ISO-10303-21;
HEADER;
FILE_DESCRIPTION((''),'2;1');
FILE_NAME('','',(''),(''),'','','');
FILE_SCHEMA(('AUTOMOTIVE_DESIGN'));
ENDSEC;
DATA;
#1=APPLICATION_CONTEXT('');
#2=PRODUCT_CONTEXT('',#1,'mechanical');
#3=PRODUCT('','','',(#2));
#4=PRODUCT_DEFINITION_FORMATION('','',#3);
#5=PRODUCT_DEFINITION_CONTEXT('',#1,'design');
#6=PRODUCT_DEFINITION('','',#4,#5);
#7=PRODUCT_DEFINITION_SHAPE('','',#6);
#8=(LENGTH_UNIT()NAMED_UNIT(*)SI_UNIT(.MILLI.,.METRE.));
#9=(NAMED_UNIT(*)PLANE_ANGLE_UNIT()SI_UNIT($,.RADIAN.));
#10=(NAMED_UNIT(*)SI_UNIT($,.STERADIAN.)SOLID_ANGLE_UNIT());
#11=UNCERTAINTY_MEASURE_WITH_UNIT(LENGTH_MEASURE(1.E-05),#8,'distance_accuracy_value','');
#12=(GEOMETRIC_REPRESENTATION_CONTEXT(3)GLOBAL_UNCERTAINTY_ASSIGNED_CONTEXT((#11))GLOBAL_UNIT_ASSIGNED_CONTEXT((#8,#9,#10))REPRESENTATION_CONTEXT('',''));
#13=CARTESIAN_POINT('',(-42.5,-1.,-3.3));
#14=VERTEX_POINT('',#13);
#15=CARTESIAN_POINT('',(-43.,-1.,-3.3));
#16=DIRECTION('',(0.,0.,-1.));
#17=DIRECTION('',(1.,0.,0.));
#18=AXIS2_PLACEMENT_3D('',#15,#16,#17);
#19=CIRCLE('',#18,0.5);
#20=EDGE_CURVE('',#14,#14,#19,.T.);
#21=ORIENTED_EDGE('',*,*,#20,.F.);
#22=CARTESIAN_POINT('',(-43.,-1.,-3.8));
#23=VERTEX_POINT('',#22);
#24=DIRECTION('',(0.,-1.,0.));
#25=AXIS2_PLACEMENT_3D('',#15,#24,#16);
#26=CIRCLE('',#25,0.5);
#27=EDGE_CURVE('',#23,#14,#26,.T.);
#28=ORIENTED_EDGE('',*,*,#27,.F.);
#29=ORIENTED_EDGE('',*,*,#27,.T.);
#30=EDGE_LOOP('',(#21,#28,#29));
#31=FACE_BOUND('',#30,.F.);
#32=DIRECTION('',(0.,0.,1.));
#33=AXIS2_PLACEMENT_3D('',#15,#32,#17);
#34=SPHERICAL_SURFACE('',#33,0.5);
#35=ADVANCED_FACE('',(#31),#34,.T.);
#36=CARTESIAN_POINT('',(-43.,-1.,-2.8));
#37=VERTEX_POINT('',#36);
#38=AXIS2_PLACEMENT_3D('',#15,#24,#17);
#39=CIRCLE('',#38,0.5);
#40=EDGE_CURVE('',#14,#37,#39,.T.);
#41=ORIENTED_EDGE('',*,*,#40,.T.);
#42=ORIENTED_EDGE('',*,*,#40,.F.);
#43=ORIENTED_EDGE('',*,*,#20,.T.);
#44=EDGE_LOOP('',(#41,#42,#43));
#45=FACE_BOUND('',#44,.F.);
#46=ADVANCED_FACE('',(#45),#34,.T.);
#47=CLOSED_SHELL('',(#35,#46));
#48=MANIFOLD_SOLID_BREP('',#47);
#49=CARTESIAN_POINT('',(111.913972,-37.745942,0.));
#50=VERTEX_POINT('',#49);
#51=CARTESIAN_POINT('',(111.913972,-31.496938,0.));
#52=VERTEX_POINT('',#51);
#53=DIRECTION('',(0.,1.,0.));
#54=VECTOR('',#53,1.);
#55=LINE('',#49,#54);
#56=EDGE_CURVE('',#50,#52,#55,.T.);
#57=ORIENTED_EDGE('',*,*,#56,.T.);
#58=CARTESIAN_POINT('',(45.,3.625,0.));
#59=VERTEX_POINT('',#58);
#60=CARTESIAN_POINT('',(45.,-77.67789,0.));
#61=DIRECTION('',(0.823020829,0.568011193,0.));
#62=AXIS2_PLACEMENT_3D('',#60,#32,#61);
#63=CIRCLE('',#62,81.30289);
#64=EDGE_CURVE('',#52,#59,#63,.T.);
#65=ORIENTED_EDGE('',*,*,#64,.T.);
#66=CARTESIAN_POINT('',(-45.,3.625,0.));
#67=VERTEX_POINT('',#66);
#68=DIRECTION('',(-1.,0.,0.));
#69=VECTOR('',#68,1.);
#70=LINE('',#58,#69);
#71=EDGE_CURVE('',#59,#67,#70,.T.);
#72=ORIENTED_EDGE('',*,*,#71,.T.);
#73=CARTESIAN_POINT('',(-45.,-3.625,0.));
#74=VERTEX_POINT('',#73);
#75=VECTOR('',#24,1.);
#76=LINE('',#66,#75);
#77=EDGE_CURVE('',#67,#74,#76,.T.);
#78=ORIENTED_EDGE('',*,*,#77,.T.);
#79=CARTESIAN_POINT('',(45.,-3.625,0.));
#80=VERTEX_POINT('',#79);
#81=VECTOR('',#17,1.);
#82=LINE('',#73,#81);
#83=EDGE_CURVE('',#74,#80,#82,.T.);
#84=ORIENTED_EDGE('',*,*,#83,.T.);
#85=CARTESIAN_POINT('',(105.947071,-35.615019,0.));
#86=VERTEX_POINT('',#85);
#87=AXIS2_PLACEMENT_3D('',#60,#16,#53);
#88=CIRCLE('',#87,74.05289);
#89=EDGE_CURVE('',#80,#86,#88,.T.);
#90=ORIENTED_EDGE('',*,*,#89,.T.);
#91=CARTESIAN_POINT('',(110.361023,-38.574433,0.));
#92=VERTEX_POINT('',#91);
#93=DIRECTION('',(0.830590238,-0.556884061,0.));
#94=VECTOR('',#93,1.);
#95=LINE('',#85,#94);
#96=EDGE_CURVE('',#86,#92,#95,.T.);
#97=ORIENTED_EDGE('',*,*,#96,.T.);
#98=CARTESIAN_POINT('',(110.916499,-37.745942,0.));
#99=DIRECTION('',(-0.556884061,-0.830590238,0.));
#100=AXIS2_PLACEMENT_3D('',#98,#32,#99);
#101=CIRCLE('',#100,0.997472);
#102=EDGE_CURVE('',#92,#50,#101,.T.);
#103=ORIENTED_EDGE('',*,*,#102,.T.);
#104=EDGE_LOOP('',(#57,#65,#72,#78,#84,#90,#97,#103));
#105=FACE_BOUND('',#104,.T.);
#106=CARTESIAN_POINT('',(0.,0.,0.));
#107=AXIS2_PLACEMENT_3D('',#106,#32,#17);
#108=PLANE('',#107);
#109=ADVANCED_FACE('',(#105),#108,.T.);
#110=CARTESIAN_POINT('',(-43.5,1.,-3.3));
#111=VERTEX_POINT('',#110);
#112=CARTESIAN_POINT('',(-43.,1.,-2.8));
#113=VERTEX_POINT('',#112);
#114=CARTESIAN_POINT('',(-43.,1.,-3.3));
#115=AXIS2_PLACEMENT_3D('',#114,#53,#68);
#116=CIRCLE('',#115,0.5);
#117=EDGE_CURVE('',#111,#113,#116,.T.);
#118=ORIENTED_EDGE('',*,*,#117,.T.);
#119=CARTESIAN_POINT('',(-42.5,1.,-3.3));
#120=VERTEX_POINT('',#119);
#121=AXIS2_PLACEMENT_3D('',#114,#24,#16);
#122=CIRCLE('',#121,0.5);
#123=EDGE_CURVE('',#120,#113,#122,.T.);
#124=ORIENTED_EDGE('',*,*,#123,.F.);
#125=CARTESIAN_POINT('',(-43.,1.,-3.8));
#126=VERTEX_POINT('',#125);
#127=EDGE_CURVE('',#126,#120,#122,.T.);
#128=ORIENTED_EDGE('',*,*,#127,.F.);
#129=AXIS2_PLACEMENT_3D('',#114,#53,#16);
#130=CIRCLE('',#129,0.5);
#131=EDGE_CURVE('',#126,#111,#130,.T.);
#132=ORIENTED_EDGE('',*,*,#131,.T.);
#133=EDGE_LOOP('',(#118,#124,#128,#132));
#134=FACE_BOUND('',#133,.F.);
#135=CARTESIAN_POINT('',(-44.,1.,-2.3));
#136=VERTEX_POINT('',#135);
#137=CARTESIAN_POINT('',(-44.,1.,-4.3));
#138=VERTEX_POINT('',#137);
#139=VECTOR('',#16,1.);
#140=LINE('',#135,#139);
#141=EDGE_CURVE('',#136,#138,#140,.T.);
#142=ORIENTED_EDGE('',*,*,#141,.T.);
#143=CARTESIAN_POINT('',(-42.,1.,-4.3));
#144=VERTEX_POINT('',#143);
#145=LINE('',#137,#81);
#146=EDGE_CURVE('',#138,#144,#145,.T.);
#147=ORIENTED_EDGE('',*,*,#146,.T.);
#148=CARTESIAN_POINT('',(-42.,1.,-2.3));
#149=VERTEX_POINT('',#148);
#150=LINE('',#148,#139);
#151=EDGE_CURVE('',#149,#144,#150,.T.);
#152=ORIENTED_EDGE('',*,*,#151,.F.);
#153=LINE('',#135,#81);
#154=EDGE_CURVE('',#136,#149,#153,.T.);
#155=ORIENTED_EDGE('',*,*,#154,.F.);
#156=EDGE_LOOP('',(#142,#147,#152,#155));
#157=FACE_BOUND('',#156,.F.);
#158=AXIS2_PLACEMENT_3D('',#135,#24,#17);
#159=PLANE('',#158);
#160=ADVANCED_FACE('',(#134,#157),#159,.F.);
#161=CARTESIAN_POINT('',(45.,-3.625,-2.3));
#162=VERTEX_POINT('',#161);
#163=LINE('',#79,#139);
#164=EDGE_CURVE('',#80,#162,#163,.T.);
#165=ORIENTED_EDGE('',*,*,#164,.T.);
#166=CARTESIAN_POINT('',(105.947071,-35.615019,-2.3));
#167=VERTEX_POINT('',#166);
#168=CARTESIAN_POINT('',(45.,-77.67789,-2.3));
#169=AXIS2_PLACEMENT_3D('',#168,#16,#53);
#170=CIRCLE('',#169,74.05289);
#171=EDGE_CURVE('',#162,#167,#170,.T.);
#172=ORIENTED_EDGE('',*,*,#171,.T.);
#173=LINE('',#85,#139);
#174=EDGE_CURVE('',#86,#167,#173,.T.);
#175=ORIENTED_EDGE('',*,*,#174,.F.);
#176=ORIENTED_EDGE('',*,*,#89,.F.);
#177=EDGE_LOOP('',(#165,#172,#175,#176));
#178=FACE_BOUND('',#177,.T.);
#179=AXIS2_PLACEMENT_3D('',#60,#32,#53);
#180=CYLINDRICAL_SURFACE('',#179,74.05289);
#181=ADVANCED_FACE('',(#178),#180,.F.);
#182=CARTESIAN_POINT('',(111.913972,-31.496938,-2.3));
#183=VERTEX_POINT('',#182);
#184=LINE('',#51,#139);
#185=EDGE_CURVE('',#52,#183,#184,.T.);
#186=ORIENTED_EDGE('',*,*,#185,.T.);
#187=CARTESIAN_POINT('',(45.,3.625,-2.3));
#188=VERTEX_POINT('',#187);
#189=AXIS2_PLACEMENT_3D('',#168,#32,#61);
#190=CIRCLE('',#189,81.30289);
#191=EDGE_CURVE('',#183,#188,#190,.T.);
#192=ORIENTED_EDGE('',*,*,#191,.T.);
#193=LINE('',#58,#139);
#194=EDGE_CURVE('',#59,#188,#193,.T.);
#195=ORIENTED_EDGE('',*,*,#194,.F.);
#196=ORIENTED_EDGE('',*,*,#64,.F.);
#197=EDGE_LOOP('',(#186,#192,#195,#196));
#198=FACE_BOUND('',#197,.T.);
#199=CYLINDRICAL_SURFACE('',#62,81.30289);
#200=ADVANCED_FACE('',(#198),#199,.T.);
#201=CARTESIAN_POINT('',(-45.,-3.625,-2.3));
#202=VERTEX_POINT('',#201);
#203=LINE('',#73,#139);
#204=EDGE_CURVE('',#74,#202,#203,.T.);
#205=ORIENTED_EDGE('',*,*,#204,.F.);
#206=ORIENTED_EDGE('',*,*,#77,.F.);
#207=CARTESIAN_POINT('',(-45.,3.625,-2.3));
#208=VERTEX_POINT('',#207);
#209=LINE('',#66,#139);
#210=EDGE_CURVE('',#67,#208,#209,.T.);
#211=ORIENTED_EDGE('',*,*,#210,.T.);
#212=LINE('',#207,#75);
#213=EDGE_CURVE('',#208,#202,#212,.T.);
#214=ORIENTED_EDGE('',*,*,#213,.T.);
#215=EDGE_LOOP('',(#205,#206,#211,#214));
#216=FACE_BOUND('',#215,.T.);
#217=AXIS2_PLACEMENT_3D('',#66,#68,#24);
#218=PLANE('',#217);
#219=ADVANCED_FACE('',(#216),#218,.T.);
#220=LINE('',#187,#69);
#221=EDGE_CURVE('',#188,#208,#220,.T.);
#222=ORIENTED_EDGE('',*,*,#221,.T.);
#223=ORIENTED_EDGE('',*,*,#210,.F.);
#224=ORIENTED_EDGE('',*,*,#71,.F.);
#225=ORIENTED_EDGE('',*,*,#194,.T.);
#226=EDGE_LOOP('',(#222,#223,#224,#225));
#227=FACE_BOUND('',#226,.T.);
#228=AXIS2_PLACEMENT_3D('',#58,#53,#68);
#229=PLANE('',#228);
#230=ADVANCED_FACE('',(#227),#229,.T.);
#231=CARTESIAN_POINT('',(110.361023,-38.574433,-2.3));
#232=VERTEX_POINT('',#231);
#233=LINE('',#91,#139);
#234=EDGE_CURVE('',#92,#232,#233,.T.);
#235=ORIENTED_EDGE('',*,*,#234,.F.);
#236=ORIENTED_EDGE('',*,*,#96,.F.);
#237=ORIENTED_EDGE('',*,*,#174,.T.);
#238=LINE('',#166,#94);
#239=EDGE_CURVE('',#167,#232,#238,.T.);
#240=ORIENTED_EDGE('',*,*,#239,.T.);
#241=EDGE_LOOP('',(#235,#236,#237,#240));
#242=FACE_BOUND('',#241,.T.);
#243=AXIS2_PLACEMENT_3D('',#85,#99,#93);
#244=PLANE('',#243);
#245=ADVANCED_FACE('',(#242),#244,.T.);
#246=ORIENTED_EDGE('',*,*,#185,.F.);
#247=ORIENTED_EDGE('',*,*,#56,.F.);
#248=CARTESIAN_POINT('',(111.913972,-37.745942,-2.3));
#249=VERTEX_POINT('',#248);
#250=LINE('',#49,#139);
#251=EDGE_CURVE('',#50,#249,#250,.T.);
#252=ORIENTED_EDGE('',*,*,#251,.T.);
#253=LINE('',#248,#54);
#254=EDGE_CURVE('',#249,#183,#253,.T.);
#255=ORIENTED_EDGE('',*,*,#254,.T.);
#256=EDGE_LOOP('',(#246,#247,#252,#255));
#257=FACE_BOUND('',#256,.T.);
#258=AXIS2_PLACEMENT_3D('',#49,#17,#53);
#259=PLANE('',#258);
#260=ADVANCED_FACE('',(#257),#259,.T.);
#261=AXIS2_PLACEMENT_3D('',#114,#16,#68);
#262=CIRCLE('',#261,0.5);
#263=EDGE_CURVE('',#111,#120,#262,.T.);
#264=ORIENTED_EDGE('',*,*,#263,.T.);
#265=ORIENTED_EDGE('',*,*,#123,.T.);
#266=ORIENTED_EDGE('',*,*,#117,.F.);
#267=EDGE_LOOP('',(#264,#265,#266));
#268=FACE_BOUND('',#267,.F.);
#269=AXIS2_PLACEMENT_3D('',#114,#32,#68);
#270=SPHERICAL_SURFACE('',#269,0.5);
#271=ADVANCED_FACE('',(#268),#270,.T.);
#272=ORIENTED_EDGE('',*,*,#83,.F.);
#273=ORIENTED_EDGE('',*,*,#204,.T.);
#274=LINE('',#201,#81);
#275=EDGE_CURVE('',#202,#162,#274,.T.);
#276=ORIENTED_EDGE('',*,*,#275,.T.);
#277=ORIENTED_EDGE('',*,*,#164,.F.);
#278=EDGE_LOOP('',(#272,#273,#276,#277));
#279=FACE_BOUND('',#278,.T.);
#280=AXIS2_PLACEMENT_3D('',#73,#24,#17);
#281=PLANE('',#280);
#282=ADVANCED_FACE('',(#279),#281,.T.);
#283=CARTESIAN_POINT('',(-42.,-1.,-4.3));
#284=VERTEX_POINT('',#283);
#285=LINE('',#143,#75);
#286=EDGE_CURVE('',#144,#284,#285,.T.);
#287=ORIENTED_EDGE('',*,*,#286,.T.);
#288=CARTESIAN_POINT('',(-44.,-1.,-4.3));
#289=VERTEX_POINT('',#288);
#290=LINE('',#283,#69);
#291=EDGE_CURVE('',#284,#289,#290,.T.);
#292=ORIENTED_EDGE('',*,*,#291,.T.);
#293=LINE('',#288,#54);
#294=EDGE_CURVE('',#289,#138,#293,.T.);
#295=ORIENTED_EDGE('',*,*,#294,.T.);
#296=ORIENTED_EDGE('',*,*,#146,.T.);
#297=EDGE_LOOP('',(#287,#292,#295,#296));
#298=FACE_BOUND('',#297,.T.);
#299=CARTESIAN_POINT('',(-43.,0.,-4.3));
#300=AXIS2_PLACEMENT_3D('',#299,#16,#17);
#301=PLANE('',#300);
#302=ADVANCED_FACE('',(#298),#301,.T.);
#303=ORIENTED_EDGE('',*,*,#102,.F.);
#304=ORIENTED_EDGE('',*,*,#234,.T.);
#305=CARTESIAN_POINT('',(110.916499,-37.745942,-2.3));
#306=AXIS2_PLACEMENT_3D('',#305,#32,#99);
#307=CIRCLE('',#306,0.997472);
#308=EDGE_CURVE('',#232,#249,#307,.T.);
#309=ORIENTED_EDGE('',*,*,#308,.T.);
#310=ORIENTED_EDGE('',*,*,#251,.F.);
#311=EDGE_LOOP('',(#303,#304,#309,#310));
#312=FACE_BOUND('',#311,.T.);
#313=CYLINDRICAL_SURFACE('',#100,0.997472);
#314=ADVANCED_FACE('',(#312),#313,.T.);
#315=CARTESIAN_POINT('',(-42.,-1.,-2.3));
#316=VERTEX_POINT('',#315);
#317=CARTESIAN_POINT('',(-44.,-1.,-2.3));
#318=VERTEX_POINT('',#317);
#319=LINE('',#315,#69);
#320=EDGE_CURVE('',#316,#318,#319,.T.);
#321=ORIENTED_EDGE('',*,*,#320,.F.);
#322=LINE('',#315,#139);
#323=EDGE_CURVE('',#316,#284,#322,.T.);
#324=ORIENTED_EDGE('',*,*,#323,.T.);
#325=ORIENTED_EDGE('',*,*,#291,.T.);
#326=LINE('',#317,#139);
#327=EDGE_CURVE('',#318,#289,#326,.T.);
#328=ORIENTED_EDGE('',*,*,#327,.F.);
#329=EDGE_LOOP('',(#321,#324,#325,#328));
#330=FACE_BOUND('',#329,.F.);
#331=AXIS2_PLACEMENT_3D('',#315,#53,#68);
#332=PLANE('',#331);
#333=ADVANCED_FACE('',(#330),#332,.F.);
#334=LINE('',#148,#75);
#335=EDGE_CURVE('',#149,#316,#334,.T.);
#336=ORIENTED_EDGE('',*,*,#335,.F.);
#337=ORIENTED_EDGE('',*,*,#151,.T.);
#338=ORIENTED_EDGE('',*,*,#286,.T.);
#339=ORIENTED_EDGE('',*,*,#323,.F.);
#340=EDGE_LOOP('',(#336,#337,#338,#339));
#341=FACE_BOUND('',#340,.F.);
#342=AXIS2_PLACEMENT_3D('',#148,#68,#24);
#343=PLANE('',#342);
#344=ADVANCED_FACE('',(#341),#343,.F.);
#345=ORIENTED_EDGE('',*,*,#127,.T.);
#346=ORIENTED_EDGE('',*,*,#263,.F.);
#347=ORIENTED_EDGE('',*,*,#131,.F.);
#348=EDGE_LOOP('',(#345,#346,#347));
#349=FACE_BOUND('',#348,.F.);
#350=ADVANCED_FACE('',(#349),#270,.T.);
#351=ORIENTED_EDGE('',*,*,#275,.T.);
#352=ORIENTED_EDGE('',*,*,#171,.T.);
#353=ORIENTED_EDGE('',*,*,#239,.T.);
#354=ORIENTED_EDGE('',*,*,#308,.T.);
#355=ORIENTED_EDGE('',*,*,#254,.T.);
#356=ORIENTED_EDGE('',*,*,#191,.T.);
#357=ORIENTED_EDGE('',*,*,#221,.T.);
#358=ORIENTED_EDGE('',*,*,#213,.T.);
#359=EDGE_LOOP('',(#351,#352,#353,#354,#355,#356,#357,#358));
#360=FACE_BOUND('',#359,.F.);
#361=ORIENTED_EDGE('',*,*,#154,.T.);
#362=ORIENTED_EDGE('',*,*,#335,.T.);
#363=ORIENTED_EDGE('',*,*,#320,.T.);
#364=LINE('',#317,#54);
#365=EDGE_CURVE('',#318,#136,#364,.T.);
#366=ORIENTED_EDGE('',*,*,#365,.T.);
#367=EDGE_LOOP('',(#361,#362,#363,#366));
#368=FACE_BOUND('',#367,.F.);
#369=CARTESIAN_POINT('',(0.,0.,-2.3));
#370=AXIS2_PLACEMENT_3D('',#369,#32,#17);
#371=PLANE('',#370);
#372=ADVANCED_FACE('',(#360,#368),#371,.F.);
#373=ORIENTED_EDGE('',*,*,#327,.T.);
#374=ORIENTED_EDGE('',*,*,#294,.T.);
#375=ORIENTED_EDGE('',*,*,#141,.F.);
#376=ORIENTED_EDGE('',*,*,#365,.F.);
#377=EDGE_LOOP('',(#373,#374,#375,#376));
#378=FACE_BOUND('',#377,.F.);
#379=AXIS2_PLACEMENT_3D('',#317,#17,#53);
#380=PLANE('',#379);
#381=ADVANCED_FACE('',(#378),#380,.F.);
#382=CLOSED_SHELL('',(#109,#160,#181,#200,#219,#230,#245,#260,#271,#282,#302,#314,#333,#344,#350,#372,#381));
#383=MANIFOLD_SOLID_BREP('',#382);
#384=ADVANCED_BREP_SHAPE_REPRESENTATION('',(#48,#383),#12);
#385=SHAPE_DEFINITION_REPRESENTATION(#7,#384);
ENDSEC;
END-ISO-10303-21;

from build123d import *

# Parameters (mm, degrees)
F1_DEPTH = 2.3
F3_DEPTH = 2


with BuildPart() as f1:
    # F0 (on Top) → F1 (new body)
    with BuildSketch(Plane.XY):
        Polygon((45, 3.625), (-45, 3.625), (-45, 0), (-45, -3.625), (45, -3.625), align=None)
        Polygon((-44, -1), (-44, 0), (-44, 1), (-42, 1), (-42, -1), align=None, mode=Mode.SUBTRACT)
        with BuildLine():
            ThreePointArc((111.9139716029, -31.496938318), (82.7856789898, -5.6889854515), (45, 3.625))
            Line((45, 3.625), (45, -3.625))
            ThreePointArc((45, -3.625), (79.4162271285, -12.1084320129), (105.947070592, -35.615019464))
            Line((105.947070592, -35.615019464), (110.3610228539, -38.574432601))
            ThreePointArc((110.3610228539, -38.574432601), (111.3860089549, -38.6260052928), (111.9139716029, -37.7459418336))
            Line((111.9139716029, -37.7459418336), (111.9139716029, -31.496938318))
        make_face()
        Polygon((-44, 1), (-44, 0), (-44, -1), (-42, -1), (-42, 1), align=None)
    extrude(amount=-F1_DEPTH)

    # F2 (on face) → F3 (join)
    with BuildSketch(Plane(origin=(0, 0, -2.3), x_dir=(1, 0, 0), z_dir=(0, 0, -1))):
        Polygon((-44, 1), (-44, 0), (-44, -1), (-42, -1), (-42, 1), align=None)
    extrude(amount=F3_DEPTH)

    # F6 (on face) → F7 (revolve)
    with BuildSketch(Plane(origin=(0, 1, 0), x_dir=(-1, 0, 0), z_dir=(0, 1, 0))):
        with BuildLine():
            ThreePointArc((43.5, -3.3), (43.3535533906, -2.9464466094), (43, -2.8))
            Line((43, -2.8), (43, -3.3))
            Line((43, -3.3), (43.5, -3.3))
        make_face()
        with BuildLine():
            Line((43.5, -3.3), (43, -3.3))
            Line((43, -3.3), (43, -3.8))
            ThreePointArc((43, -3.8), (43.3535533906, -3.6535533906), (43.5, -3.3))
        make_face()
    revolve(axis=Axis((-43, 1, -3.3), (0, 0, -1)))


with BuildPart() as f5:
    # F4 (on face) → F5 (revolve)
    with BuildSketch(Plane.XZ.offset(1)):
        with BuildLine():
            Line((-43, -3.3), (-42.5, -3.3))
            ThreePointArc((-42.5, -3.3), (-42.6464466094, -2.9464466094), (-43, -2.8))
            Line((-43, -2.8), (-43, -3.3))
        make_face()
        with BuildLine():
            ThreePointArc((-43, -3.8), (-42.6464466094, -3.6535533906), (-42.5, -3.3))
            Line((-42.5, -3.3), (-43, -3.3))
            Line((-43, -3.3), (-43, -3.8))
        make_face()
    revolve(axis=Axis((-43, -1, -3.3), (0, 0, -1)))


solid = Compound([f1.part, f5.part])
